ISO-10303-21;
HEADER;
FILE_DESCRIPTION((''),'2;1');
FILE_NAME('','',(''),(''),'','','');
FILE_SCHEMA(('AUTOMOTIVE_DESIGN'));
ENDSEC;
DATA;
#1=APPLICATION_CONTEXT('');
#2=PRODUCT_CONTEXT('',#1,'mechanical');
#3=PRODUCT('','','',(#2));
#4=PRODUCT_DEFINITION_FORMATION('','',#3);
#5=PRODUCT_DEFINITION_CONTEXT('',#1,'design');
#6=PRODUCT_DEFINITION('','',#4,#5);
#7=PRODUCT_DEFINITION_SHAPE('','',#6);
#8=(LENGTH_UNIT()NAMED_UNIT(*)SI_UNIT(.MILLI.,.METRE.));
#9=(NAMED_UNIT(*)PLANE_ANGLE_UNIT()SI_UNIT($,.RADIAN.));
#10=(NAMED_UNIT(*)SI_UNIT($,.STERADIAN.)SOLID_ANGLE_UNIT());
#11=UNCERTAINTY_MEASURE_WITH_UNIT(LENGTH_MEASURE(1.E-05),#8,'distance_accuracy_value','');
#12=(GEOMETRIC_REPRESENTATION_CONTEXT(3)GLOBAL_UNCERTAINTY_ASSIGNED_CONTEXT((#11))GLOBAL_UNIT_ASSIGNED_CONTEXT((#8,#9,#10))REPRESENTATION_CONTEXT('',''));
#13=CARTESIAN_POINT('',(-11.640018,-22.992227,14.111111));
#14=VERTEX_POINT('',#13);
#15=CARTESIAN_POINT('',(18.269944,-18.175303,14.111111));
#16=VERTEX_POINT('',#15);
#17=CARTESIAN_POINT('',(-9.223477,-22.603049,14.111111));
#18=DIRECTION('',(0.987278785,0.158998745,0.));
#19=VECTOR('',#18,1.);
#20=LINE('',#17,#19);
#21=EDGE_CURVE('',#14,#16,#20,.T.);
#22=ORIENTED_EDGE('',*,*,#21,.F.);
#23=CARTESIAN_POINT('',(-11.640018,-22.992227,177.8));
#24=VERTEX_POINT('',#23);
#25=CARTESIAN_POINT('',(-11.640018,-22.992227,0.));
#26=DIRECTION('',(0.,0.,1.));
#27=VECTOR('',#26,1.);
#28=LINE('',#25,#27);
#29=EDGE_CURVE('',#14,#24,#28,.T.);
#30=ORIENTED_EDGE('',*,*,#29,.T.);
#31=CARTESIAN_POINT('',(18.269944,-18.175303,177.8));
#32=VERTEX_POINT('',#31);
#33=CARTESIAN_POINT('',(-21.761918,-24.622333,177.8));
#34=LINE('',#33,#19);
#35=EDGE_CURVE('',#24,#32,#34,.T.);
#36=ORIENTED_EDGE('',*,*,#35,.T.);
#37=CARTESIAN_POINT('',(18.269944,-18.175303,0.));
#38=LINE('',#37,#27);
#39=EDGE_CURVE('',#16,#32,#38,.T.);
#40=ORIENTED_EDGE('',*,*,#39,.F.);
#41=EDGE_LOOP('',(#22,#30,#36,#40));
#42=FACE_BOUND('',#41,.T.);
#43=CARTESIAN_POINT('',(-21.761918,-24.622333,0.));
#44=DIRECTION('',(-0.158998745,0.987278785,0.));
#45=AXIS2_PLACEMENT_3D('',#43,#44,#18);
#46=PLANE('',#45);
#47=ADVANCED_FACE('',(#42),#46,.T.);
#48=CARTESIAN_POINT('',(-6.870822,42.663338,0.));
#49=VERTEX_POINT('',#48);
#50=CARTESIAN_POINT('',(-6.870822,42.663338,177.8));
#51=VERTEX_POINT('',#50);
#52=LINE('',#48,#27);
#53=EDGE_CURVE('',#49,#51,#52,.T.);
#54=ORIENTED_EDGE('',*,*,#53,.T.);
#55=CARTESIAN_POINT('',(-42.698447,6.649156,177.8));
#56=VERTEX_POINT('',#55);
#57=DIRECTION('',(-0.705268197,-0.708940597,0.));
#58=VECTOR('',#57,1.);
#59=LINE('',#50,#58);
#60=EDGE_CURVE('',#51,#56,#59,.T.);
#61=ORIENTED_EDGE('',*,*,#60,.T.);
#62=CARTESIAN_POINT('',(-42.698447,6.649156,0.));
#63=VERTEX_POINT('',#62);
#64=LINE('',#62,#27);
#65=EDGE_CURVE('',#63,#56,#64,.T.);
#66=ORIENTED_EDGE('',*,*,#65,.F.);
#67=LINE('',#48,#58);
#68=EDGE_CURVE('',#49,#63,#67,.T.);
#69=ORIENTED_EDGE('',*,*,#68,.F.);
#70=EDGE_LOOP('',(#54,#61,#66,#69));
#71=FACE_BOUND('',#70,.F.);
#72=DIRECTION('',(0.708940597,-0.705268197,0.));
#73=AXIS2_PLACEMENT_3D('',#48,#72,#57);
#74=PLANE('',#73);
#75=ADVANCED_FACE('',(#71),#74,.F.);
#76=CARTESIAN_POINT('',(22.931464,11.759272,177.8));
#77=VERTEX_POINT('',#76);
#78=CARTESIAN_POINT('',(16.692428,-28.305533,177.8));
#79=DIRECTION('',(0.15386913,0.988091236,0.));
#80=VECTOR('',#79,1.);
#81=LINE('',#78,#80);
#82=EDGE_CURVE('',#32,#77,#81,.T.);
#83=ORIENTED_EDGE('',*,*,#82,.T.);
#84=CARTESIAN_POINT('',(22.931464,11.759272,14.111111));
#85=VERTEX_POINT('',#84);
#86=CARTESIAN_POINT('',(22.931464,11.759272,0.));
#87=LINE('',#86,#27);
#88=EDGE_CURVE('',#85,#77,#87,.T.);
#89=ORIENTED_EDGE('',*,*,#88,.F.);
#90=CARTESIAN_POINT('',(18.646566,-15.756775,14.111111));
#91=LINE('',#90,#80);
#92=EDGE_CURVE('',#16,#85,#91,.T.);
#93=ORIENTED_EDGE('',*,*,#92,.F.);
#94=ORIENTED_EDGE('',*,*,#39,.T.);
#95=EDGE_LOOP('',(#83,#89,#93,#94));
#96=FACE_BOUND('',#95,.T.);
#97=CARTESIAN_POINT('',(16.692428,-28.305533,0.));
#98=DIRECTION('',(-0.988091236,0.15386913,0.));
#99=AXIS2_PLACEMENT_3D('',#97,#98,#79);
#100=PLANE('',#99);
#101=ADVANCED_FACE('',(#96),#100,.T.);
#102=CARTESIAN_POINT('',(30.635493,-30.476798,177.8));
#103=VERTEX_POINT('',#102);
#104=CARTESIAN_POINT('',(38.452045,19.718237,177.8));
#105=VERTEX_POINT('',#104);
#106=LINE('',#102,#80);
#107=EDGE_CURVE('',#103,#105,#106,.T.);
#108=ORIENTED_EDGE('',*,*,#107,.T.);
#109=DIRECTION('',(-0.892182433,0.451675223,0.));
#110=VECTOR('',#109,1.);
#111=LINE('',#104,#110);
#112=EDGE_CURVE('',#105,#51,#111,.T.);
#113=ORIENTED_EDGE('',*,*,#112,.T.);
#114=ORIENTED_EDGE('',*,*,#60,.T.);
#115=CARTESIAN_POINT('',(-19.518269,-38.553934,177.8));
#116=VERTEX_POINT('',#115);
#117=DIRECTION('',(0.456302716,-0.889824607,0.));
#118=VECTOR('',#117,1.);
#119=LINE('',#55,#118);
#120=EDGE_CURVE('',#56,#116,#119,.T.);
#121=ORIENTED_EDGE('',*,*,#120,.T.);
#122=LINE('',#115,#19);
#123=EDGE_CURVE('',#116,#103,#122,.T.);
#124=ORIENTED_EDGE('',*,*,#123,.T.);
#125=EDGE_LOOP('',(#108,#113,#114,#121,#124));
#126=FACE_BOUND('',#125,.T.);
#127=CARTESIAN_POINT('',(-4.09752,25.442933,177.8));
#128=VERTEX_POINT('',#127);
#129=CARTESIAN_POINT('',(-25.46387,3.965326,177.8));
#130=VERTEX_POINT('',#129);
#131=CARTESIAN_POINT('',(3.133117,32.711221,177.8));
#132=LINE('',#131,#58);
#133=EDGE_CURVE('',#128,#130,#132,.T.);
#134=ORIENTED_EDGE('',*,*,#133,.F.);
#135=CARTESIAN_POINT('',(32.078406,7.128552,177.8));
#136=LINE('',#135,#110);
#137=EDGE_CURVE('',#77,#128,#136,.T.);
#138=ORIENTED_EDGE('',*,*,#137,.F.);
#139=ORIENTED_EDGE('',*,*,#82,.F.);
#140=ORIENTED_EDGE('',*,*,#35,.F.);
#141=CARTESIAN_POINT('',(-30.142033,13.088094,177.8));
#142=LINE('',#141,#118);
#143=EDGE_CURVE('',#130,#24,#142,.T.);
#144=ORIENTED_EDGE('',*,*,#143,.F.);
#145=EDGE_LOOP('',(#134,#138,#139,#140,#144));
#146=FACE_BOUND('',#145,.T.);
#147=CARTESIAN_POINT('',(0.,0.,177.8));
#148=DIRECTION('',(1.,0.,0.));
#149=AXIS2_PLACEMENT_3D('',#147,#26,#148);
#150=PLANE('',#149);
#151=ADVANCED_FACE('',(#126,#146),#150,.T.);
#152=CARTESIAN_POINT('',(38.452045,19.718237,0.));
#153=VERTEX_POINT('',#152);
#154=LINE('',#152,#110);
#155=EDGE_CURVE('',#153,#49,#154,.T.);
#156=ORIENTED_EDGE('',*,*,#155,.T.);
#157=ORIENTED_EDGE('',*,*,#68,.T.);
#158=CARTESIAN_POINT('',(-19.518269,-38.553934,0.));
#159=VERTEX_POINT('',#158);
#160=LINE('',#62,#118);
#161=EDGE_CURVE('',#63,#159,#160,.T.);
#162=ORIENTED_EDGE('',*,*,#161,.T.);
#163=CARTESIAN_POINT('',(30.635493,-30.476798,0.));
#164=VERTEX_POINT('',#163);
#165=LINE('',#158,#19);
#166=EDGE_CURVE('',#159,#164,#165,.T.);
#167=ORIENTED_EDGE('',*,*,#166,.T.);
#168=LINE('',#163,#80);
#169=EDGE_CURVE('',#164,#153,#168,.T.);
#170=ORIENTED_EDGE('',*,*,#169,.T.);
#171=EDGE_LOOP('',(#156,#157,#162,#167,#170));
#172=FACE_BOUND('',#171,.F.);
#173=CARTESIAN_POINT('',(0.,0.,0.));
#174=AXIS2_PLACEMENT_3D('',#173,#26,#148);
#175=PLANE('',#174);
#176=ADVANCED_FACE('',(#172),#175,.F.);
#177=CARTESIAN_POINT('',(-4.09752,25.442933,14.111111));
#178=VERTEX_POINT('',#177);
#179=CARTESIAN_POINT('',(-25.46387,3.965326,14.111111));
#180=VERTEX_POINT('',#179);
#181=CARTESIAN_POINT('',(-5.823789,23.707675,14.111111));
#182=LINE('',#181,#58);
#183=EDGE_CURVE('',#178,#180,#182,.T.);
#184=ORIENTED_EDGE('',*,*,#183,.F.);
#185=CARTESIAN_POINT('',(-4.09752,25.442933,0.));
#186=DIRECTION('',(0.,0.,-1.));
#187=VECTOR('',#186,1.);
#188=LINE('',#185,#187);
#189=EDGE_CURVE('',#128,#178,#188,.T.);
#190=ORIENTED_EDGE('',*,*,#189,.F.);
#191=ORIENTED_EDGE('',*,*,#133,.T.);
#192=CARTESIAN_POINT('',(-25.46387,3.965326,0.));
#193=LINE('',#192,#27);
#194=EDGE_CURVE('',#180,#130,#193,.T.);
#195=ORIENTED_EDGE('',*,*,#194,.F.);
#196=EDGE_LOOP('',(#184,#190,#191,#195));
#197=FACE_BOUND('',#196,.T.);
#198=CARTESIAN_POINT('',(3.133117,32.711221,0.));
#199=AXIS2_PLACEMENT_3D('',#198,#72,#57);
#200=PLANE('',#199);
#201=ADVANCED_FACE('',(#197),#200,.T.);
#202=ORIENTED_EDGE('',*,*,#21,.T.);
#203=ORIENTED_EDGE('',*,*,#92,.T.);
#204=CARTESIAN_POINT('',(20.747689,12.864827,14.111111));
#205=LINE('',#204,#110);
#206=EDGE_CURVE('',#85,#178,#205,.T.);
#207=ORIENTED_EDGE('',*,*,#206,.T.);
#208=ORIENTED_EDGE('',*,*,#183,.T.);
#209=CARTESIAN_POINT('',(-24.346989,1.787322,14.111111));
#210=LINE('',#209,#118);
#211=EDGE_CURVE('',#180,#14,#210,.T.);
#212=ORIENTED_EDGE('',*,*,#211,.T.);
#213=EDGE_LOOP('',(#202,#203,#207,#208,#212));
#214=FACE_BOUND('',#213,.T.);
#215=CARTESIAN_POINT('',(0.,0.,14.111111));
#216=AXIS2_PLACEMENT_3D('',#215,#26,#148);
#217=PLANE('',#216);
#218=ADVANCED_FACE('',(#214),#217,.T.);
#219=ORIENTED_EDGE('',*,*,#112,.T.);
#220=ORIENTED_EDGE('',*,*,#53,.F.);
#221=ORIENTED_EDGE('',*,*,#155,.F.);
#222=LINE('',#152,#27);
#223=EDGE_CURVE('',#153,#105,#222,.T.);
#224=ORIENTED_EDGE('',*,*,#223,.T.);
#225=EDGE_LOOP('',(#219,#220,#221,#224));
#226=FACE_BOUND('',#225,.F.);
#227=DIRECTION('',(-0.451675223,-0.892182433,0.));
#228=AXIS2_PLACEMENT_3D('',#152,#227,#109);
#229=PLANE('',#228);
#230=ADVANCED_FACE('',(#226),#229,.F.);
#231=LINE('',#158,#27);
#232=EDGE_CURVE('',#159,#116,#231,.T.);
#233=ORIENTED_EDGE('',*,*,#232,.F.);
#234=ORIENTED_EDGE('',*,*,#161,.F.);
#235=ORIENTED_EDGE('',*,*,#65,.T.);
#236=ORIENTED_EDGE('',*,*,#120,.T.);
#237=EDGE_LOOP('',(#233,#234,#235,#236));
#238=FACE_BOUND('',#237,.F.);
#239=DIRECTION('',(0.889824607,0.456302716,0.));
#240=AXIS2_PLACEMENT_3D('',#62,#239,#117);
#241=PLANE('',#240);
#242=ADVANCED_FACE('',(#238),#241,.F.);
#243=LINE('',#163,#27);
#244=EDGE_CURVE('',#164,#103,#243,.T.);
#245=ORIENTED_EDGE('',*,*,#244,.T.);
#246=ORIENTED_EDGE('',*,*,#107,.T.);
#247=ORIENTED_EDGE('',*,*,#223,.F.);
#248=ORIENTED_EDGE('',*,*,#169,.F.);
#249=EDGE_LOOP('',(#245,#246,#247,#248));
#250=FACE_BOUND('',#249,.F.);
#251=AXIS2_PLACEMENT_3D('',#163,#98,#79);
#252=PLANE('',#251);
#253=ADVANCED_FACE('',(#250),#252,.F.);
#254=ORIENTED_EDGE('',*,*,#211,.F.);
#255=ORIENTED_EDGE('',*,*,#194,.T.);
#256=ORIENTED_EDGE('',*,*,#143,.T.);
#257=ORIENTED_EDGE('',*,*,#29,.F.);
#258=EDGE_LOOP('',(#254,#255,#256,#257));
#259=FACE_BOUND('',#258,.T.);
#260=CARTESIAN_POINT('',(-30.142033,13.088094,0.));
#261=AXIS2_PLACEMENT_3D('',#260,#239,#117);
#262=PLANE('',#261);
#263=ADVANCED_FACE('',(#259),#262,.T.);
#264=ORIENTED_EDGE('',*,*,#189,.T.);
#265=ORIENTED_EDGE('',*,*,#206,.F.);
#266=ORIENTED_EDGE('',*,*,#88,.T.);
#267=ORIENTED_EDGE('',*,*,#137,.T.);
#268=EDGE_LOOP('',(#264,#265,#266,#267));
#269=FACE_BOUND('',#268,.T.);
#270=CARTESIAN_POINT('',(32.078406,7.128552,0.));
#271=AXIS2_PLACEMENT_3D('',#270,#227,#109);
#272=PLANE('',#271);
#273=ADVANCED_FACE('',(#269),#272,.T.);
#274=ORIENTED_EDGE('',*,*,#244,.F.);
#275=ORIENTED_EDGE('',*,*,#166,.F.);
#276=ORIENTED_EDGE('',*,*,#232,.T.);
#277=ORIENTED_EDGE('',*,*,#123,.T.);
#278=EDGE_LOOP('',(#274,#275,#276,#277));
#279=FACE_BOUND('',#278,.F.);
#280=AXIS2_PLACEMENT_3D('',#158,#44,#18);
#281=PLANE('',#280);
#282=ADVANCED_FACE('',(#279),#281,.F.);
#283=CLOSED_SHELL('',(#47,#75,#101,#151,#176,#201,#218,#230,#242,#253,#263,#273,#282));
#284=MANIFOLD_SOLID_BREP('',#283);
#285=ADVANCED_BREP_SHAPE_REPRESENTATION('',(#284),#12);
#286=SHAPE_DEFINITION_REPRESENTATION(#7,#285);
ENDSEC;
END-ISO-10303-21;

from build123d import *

# Parameters (mm, degrees)
F1_DEPTH = 177.8
F2_T     = -14.1111111111


# Not quite as in the source:
# - a length typed as a fraction of an inch, garbled in the dataset ("3 / 203.2 mm" for 3/8 in), is restored


with BuildPart() as f1:
    # F0 (on Top) → F1 (new body)
    with BuildSketch(Plane.XY):
        Polygon((-6.8708224943, 42.663338416), (-42.6984469235, 6.6491561018), (-19.5182689713, -38.5539339486), (30.6354932977, -30.4767976821), (38.4520450914, 19.7182371128), align=None)
    extrude(amount=F1_DEPTH)

    # F2
    f2_openings = [f1.faces().sort_by_distance(p)[0] for p in [
        (0, 0, 177.8),
    ]]
    offset(amount=F2_T, openings=f2_openings)


solid = f1.part
